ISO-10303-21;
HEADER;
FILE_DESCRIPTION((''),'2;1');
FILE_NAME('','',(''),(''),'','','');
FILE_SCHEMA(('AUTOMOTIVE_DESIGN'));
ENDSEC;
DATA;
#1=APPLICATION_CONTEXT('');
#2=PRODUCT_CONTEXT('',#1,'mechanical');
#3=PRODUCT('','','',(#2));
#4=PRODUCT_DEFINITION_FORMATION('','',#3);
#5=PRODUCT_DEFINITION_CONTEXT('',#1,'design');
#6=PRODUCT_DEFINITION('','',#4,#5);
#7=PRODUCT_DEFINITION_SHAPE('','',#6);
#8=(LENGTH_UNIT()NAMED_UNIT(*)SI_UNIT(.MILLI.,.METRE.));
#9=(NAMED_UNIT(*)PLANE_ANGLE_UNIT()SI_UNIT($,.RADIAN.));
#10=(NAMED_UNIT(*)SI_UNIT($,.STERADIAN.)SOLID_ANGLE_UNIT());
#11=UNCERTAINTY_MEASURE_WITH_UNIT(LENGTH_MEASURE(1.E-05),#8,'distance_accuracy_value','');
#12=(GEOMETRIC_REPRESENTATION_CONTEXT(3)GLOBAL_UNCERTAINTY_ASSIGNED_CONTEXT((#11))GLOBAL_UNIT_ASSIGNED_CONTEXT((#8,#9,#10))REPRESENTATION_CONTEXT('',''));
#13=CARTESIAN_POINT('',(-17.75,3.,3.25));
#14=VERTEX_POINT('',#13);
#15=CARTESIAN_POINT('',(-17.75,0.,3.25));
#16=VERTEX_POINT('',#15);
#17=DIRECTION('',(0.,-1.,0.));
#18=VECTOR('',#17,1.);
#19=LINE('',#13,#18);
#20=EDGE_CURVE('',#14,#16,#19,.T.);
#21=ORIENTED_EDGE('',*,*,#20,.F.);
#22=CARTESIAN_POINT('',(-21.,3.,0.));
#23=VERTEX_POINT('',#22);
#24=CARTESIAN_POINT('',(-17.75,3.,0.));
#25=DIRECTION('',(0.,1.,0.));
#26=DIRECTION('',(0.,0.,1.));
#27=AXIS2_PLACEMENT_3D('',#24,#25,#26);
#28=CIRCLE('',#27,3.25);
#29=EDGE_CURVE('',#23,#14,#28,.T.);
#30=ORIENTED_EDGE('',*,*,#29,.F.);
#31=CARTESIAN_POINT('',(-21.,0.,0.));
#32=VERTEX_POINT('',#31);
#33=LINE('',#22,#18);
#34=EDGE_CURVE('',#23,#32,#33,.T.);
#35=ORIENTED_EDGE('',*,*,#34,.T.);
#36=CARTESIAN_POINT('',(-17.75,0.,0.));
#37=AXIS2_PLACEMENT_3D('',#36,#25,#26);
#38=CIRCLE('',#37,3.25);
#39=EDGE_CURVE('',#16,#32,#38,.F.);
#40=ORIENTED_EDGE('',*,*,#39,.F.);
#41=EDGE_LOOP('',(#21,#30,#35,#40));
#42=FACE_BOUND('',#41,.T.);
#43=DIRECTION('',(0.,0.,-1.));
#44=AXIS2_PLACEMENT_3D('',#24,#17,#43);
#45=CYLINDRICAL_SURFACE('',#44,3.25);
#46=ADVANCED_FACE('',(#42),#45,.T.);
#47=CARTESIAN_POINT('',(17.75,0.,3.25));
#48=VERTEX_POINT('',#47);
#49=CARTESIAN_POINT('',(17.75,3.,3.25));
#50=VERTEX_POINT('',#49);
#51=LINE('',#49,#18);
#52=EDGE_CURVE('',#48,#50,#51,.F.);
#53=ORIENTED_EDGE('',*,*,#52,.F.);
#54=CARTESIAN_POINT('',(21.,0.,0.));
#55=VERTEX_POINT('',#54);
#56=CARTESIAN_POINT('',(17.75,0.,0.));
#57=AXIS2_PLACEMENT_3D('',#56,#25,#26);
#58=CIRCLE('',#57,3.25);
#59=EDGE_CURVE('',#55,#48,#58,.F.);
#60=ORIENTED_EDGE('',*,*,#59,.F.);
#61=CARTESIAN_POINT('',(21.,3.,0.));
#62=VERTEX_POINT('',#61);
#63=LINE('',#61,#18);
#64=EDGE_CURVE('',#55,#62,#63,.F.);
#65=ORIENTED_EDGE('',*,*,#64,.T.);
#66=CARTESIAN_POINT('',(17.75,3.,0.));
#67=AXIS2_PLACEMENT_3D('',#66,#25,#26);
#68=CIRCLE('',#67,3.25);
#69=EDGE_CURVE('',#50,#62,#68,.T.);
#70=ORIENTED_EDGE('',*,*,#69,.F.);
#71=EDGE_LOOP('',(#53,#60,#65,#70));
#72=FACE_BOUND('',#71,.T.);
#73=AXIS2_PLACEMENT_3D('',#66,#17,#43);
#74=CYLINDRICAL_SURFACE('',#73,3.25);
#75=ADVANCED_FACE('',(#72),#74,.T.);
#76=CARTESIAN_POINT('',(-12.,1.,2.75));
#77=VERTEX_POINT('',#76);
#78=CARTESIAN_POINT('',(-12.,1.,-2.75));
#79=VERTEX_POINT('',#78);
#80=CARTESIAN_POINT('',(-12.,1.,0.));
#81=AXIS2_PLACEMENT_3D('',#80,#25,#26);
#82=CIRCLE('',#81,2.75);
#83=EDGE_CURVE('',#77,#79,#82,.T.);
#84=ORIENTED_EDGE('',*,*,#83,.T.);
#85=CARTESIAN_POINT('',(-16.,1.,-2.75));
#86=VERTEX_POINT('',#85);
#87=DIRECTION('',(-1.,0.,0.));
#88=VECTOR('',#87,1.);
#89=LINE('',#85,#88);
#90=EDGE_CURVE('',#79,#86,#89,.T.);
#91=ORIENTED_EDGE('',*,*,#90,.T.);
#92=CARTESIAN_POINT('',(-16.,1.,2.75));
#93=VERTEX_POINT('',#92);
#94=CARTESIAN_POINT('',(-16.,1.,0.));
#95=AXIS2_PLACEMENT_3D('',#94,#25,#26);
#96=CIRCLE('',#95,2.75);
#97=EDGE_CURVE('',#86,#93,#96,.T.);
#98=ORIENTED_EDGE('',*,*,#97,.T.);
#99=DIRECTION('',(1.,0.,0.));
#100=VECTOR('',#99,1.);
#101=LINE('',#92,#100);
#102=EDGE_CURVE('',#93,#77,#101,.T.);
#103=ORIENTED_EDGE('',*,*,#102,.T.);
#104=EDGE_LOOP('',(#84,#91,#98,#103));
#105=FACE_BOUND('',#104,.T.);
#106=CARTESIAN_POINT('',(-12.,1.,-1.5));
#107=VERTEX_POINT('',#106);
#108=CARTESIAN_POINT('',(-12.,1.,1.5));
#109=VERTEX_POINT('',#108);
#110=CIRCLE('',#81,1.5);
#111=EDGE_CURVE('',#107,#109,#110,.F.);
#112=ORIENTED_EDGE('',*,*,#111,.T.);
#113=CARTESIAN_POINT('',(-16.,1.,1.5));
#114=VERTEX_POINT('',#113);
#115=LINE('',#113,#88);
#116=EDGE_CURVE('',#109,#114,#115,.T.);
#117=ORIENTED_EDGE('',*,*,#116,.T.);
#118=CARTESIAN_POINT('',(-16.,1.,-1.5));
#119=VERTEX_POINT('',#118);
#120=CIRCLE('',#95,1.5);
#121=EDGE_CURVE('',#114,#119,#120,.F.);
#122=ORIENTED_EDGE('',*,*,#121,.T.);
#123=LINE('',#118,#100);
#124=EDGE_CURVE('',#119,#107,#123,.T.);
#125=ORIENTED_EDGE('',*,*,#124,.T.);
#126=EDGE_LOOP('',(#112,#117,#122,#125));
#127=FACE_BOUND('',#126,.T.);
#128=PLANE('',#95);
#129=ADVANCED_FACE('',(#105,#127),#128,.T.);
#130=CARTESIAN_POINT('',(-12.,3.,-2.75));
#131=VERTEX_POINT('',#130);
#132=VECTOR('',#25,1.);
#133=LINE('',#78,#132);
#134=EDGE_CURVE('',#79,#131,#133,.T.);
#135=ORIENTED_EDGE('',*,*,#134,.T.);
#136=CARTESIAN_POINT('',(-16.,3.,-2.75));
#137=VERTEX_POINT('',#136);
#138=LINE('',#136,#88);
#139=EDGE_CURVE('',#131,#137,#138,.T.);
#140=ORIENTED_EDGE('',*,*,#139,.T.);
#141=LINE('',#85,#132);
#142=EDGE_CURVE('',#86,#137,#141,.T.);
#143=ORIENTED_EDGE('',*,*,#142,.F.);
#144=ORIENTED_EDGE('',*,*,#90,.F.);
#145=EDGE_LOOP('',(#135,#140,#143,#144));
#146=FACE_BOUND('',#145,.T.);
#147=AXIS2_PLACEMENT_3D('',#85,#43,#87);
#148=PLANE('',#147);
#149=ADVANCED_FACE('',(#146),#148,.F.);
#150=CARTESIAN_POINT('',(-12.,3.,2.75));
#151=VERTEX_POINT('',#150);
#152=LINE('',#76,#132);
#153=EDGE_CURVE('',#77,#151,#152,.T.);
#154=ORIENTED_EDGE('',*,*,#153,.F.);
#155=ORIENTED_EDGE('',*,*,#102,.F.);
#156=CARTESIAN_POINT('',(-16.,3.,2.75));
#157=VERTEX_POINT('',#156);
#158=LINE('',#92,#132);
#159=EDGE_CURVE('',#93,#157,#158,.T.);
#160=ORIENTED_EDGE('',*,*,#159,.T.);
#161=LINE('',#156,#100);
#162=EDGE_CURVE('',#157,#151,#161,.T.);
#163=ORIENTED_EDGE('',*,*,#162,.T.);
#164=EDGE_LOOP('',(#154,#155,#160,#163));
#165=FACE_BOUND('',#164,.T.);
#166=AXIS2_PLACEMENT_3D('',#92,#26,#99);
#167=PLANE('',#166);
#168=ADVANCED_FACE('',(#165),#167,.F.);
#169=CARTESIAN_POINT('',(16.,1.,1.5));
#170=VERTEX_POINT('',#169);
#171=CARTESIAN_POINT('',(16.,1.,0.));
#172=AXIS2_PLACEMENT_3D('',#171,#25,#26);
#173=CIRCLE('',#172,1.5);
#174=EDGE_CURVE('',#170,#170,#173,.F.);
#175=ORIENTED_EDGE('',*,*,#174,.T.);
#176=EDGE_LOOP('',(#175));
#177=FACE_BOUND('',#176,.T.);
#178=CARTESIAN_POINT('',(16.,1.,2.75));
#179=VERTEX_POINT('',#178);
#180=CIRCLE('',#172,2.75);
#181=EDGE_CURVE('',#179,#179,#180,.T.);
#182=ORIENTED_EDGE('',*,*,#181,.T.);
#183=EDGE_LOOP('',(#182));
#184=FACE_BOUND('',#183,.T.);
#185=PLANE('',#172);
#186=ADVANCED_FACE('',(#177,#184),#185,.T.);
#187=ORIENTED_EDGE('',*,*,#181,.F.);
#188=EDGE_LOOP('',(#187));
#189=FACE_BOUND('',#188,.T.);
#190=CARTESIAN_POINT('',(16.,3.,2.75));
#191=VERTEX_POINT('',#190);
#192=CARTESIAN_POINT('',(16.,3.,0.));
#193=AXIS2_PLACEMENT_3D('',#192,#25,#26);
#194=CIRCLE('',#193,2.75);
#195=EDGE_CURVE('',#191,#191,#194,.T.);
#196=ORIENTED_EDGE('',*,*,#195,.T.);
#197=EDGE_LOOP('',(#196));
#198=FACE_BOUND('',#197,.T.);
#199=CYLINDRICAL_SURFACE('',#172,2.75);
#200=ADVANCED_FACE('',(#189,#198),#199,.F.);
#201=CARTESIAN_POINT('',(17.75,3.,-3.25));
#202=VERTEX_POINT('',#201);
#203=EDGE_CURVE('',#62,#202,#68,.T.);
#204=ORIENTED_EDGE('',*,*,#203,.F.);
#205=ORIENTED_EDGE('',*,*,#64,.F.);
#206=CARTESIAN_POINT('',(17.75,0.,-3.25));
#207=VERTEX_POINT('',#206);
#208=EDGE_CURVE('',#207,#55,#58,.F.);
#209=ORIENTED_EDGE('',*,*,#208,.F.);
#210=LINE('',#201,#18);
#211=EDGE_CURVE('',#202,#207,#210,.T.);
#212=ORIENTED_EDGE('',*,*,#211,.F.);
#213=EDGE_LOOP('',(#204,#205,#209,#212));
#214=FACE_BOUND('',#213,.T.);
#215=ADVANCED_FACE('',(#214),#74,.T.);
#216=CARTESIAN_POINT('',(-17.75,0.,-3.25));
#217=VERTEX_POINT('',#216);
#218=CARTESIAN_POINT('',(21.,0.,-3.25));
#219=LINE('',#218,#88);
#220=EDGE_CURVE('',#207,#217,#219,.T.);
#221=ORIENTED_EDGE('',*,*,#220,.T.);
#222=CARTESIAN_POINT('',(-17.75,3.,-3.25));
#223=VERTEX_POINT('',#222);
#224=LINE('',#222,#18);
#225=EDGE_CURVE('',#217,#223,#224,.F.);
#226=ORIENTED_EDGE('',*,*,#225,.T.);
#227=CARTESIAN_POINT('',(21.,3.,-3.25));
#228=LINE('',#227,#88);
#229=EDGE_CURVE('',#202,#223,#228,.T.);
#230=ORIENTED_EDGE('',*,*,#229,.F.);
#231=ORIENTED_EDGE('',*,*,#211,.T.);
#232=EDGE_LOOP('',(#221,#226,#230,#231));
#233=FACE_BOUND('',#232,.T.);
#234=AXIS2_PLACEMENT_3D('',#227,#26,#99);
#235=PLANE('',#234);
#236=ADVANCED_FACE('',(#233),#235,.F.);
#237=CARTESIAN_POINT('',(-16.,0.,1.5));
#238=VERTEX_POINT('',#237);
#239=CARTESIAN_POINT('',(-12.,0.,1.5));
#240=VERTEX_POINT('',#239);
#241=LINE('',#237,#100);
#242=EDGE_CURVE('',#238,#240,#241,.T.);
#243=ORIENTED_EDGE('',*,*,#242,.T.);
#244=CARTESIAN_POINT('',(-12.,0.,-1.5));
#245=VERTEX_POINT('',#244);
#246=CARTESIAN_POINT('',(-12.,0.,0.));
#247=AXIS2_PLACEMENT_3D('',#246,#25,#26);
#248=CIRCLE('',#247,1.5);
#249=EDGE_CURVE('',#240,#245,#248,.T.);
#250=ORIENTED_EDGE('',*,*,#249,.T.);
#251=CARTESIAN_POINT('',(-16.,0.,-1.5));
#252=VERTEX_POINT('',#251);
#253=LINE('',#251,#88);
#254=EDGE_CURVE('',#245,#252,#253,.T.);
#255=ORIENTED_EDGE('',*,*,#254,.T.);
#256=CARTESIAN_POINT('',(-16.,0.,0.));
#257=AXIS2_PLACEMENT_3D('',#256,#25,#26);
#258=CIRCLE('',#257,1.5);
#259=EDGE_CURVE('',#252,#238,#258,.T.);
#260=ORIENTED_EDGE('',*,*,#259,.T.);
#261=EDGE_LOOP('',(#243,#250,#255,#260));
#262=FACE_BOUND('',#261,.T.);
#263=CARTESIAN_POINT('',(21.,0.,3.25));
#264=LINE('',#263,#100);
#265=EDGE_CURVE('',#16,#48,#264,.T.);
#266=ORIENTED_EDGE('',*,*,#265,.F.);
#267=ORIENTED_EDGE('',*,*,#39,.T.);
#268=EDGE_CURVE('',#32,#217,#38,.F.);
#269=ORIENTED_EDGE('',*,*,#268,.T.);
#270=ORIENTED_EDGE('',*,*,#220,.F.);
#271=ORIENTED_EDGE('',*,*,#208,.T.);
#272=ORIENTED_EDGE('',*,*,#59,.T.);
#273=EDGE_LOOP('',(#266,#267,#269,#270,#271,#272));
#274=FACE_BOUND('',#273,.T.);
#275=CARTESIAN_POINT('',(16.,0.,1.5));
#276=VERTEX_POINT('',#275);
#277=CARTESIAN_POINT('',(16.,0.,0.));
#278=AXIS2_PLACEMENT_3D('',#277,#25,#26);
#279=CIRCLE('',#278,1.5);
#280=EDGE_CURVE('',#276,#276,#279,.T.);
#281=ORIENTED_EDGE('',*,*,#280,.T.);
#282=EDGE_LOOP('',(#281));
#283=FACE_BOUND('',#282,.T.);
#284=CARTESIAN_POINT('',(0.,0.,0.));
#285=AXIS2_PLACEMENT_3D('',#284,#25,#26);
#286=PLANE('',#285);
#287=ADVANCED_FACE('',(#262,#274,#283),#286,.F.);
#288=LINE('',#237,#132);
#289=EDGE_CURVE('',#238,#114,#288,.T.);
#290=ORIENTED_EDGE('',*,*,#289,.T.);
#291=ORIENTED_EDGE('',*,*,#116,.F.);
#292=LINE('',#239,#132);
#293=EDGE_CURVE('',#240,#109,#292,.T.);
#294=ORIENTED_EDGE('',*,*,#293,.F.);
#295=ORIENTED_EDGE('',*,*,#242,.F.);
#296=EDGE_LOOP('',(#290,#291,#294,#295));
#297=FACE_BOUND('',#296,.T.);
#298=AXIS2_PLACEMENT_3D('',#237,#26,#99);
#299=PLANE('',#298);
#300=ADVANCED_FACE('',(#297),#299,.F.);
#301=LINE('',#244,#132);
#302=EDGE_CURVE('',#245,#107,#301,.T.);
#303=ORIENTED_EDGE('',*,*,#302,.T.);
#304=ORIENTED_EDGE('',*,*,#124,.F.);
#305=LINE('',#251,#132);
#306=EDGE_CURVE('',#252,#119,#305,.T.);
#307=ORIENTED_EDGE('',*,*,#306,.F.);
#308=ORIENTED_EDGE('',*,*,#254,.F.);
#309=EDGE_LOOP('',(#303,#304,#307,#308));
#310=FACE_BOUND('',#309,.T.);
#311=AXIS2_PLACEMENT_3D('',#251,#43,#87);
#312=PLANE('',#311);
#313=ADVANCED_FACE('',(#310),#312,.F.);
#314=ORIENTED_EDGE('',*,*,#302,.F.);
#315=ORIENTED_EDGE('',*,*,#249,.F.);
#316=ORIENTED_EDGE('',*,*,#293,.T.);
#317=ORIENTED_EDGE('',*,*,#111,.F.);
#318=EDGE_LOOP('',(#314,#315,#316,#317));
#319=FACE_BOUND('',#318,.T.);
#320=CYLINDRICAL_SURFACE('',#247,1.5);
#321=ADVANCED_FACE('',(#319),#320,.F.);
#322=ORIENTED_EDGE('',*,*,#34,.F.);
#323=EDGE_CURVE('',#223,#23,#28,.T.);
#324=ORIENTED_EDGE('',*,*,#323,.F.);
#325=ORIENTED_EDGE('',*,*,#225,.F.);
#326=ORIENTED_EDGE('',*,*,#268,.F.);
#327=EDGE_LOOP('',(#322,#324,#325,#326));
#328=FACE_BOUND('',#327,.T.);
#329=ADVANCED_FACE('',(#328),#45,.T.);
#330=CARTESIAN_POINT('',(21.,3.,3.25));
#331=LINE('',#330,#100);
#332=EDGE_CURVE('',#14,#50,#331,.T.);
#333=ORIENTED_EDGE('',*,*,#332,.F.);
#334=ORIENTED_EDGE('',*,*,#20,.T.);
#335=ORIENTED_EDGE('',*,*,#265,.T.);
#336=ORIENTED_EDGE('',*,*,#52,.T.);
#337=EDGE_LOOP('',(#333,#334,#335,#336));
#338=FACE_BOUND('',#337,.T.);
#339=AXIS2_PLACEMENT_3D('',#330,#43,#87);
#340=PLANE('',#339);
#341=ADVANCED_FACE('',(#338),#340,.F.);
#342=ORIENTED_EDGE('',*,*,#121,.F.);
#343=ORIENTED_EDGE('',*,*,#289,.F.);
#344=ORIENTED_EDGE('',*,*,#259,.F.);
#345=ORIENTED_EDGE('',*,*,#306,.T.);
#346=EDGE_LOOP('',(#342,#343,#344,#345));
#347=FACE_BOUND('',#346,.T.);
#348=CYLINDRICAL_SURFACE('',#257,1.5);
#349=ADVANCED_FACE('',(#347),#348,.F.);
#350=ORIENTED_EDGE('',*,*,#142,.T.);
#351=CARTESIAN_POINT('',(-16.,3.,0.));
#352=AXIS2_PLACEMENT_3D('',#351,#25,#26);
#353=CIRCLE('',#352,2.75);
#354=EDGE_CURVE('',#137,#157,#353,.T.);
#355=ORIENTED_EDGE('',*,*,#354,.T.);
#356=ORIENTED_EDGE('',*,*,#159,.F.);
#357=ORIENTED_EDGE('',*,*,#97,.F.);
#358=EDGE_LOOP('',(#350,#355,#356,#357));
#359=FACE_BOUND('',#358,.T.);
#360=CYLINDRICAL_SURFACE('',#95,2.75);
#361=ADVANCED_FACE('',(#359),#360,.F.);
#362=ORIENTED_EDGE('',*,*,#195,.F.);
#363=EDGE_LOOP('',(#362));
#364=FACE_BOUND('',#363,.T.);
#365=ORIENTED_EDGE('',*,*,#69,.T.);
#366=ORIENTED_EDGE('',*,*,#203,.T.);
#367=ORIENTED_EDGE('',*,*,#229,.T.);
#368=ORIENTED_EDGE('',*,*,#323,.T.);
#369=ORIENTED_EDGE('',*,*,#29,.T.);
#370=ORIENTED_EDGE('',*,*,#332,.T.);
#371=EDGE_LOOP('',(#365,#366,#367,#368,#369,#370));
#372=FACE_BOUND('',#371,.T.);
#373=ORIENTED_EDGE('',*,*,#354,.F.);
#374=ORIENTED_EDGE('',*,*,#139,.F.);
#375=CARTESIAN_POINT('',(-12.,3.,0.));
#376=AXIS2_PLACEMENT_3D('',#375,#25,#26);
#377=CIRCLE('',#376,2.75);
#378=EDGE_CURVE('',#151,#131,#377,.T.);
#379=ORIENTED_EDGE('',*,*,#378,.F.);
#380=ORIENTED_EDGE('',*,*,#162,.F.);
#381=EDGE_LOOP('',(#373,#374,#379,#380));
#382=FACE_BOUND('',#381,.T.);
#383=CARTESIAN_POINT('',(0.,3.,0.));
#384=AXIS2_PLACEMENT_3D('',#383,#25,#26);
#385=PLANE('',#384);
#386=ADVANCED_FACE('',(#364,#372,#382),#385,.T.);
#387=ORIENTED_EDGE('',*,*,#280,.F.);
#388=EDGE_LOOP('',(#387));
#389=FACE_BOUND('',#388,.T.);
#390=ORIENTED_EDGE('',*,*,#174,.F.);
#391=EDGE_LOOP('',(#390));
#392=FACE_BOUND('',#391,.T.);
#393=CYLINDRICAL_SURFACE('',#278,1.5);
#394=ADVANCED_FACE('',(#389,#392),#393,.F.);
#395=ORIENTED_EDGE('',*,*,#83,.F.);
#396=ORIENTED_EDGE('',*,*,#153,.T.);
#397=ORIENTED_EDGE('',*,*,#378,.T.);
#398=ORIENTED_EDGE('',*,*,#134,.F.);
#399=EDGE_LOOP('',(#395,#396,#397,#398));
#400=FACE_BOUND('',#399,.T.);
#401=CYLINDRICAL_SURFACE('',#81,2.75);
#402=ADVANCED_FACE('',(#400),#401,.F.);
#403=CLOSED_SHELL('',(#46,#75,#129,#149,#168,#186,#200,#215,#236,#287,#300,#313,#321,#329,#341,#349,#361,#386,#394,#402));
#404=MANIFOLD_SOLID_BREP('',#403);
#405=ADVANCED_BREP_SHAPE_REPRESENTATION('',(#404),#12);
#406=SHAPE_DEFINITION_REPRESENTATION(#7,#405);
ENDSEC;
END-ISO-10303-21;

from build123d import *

# Parameters (mm, degrees)
ESBO_O1_W                = 42
ESBO_O1_H                = 6.5
RESSALTO_EXTRUS_O1_DEPTH = 3
ESBO_O2_R                = 1.5
CORTE_EXTRUS_O1_DEPTH    = 22.460719932
ESBO_O3_R                = 2.75
CORTE_EXTRUS_O2_DEPTH    = 2
FILETE1_R                = 3.25


with BuildPart() as part:
    # Esboço1 → Ressalto-extrusão1 (new body)
    with BuildSketch(Plane(origin=(0, 0, 0), x_dir=(1, 0, 0), z_dir=(0, 1, 0))):
        Rectangle(ESBO_O1_W, ESBO_O1_H)
    extrude(amount=RESSALTO_EXTRUS_O1_DEPTH)

    # Esboço2 → Corte-extrusão1 (cut, through all)
    with BuildSketch(Plane(origin=(0, 3, 0), x_dir=(1, 0, 0), z_dir=(0, 1, 0))):
        with Locations(Location((16, 0, 0), (0, 0, 270))):
            Circle(ESBO_O2_R)
        with BuildLine():
            Line((-16, 1.5), (-12, 1.5))
            ThreePointArc((-12, 1.5), (-10.5, 0), (-12, -1.5))
            Line((-12, -1.5), (-16, -1.5))
            ThreePointArc((-16, -1.5), (-17.5, 0), (-16, 1.5))
        make_face()
    extrude(amount=-CORTE_EXTRUS_O1_DEPTH, mode=Mode.SUBTRACT)

    # Esboço3 → Corte-extrusão2 (cut)
    with BuildSketch(Plane(origin=(0, 3, 0), x_dir=(1, 0, 0), z_dir=(0, 1, 0))):
        with Locations(Location((16, 0, 0), (0, 0, 270))):
            Circle(ESBO_O3_R)
        with BuildLine():
            Line((-16, 2.75), (-12, 2.75))
            ThreePointArc((-12, 2.75), (-9.25, 0), (-12, -2.75))
            Line((-12, -2.75), (-16, -2.75))
            ThreePointArc((-16, -2.75), (-18.75, 0), (-16, 2.75))
        make_face()
    extrude(amount=-CORTE_EXTRUS_O2_DEPTH, mode=Mode.SUBTRACT)

    # Filete1
    filete1_edges = [part.edges().sort_by_distance(p)[0] for p in [
        (21, 1.5, 3.25),
        (21, 1.5, -3.25),
        (-21, 1.5, 3.25),
        (-21, 1.5, -3.25),
    ]]
    fillet(filete1_edges, radius=FILETE1_R - 0.0001)  # a hair under: the kernel refuses the full size


solid = part.part
